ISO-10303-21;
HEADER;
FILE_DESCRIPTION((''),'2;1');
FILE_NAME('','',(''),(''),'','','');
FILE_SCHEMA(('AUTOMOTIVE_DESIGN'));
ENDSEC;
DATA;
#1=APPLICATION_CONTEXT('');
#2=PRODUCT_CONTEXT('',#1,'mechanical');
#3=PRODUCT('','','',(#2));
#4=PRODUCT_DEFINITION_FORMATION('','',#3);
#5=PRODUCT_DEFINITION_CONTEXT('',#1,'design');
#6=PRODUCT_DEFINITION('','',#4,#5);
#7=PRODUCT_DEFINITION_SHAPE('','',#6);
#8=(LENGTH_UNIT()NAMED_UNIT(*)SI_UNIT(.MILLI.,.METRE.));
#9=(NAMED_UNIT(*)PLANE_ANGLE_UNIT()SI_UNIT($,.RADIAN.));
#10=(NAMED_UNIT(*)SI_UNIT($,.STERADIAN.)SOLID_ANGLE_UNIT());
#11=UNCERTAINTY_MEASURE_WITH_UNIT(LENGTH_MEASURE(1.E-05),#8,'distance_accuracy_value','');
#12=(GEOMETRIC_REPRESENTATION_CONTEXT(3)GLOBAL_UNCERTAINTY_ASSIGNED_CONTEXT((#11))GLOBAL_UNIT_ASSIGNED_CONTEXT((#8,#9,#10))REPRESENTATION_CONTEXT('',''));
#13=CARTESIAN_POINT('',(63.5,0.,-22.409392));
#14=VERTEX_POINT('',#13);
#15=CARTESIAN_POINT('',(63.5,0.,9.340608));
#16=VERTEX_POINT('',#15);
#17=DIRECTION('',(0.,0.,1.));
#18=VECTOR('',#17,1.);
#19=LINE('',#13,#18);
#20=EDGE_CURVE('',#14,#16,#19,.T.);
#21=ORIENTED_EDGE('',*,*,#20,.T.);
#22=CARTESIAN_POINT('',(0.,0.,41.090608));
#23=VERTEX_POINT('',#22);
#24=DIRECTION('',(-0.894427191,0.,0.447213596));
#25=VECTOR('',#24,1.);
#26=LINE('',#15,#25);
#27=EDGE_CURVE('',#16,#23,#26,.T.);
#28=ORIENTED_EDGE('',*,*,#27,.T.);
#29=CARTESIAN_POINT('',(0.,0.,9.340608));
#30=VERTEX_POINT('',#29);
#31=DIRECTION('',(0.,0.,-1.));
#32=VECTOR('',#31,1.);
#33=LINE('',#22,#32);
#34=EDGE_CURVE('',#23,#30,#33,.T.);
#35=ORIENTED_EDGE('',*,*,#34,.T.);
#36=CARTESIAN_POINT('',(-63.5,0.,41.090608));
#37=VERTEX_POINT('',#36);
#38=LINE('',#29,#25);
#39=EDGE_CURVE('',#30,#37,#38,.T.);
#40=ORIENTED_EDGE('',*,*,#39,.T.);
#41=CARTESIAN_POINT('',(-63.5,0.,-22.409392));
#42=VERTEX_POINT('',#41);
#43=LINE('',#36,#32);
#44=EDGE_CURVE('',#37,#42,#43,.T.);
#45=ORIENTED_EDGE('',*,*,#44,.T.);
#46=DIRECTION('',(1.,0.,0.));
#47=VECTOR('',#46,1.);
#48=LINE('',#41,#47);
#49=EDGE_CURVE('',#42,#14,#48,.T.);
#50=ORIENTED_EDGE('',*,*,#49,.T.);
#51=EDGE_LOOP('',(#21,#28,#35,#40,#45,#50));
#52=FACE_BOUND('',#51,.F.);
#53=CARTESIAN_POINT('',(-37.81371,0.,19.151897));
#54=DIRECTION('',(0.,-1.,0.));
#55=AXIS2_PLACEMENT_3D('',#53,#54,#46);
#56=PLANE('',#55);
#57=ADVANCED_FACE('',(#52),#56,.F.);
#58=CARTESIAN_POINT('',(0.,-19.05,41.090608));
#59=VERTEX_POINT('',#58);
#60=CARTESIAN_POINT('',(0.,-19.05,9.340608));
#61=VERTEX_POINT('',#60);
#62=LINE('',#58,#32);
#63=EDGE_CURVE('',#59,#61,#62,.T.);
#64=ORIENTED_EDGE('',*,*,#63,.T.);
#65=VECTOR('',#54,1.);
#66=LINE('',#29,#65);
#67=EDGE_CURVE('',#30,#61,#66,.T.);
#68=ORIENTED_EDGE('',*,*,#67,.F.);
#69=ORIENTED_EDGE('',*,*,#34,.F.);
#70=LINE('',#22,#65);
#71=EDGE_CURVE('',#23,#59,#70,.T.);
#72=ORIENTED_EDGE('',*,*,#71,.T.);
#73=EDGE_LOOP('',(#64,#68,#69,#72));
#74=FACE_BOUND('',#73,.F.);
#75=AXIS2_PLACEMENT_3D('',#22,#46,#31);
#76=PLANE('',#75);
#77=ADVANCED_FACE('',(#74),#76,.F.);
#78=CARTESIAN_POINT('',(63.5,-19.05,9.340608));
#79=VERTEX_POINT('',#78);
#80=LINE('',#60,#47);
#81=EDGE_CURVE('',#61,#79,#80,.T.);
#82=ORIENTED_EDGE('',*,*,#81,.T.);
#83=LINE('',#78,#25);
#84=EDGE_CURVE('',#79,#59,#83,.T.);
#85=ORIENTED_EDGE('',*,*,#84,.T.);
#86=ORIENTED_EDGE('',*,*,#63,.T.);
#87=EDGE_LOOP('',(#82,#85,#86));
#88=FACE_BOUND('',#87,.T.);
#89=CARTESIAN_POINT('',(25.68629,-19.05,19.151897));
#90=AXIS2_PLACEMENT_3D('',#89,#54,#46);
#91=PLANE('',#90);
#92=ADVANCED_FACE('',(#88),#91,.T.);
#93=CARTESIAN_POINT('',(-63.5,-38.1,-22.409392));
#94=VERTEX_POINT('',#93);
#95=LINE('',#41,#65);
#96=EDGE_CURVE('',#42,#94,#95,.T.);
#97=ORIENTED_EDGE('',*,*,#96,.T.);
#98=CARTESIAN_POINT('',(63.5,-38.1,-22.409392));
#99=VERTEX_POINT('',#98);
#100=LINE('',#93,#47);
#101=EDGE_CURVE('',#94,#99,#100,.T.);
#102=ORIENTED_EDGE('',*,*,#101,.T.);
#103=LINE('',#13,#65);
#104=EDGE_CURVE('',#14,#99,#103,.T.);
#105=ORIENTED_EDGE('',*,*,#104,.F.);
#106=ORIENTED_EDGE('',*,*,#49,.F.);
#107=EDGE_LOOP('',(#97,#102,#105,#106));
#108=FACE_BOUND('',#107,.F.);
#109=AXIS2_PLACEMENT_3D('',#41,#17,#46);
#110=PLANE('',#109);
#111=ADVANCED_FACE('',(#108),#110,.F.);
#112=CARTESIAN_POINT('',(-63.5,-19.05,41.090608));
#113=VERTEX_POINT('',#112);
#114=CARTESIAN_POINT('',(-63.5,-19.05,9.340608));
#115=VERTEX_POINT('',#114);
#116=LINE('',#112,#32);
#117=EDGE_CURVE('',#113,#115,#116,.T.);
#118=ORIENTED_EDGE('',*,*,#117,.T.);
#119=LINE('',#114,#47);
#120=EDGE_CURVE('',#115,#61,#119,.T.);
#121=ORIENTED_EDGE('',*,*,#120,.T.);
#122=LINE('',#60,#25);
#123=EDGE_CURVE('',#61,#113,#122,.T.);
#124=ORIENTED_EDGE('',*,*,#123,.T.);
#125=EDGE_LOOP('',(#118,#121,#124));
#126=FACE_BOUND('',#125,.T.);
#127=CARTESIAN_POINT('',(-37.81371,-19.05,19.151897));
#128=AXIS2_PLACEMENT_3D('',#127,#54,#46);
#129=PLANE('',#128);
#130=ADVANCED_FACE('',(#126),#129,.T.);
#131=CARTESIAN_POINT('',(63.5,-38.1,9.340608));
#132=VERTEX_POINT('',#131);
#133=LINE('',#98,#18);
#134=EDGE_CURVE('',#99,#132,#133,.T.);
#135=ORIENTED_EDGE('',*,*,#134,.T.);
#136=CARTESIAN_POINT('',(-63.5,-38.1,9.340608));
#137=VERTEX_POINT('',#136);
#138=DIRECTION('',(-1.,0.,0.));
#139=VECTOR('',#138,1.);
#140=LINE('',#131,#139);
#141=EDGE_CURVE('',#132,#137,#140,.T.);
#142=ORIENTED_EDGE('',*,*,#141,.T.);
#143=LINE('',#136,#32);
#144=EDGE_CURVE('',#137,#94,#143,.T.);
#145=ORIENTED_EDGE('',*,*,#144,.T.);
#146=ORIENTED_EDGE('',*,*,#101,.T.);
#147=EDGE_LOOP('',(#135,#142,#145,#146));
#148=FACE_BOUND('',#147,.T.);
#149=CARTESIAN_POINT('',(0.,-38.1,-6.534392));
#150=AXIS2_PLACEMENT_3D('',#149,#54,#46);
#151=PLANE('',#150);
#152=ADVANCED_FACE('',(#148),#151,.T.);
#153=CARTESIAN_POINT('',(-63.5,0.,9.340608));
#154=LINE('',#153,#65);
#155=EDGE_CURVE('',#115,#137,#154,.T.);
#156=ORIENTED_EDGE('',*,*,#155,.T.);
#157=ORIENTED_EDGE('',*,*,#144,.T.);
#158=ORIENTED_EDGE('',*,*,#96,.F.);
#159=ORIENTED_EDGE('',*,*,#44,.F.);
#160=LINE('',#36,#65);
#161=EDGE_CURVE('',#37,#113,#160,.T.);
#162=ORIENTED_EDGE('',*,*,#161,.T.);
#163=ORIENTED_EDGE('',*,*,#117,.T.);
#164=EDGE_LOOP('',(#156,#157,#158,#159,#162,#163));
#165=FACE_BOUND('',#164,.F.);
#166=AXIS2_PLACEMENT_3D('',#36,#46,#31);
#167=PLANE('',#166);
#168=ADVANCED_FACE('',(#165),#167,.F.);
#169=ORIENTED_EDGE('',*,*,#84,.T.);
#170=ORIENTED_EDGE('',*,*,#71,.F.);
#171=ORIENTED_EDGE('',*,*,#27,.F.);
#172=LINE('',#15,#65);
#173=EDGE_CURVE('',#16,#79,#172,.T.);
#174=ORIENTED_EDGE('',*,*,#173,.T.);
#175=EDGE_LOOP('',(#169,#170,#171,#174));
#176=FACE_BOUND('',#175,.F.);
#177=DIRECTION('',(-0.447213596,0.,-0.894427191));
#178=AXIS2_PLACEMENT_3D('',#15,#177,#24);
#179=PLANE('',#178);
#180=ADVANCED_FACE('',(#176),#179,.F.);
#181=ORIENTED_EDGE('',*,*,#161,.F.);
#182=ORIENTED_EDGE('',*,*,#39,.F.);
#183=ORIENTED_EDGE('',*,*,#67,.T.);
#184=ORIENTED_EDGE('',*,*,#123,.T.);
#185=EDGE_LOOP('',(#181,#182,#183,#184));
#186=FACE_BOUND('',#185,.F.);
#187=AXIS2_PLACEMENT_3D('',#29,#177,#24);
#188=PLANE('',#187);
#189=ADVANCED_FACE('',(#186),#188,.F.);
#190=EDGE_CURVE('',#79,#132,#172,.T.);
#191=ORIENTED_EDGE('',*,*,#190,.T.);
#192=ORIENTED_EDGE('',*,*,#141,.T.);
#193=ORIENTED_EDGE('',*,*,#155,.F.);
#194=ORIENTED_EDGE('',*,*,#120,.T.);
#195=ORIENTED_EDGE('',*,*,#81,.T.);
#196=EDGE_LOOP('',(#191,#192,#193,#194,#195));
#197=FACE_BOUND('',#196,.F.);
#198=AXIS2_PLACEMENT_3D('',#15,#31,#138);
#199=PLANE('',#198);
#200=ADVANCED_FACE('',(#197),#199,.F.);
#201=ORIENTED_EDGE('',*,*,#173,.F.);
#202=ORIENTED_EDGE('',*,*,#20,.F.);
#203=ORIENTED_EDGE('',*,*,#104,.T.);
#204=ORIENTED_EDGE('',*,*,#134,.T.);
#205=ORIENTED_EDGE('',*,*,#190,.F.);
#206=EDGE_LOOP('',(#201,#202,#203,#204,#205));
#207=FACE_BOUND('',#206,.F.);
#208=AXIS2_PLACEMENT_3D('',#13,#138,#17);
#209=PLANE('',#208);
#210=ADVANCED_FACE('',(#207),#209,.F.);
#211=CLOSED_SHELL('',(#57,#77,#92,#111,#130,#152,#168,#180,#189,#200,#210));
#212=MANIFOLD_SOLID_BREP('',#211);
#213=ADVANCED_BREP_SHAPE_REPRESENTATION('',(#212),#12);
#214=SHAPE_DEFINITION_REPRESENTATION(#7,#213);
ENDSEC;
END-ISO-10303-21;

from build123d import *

# Parameters (mm, degrees)
F1_DEPTH = 38.1
F2_DEPTH = 19.05


# Not quite as in the source:
# - a length typed as a fraction of an inch, garbled in the dataset ("3 / 203.2 mm" for 3/8 in), is restored


with BuildPart() as f1:
    # F0 (on Front) → F1 (new body)
    with BuildSketch(Plane.XZ):
        Polygon((-63.5, 9.3406075202), (-63.5, -22.4093924798), (63.5, -22.4093924798), (63.5, 9.3406075202), (0, 9.3406075202), align=None)
    extrude(amount=F1_DEPTH)

    # F0 (on Front) → F2 (join)
    with BuildSketch(Plane.XZ):
        Polygon((-63.5, 41.0906075202), (-63.5, 9.3406075202), (0, 9.3406075202), align=None)
        Polygon((0, 9.3406075202), (63.5, 9.3406075202), (0, 41.0906075202), align=None)
    extrude(amount=F2_DEPTH)


solid = f1.part
